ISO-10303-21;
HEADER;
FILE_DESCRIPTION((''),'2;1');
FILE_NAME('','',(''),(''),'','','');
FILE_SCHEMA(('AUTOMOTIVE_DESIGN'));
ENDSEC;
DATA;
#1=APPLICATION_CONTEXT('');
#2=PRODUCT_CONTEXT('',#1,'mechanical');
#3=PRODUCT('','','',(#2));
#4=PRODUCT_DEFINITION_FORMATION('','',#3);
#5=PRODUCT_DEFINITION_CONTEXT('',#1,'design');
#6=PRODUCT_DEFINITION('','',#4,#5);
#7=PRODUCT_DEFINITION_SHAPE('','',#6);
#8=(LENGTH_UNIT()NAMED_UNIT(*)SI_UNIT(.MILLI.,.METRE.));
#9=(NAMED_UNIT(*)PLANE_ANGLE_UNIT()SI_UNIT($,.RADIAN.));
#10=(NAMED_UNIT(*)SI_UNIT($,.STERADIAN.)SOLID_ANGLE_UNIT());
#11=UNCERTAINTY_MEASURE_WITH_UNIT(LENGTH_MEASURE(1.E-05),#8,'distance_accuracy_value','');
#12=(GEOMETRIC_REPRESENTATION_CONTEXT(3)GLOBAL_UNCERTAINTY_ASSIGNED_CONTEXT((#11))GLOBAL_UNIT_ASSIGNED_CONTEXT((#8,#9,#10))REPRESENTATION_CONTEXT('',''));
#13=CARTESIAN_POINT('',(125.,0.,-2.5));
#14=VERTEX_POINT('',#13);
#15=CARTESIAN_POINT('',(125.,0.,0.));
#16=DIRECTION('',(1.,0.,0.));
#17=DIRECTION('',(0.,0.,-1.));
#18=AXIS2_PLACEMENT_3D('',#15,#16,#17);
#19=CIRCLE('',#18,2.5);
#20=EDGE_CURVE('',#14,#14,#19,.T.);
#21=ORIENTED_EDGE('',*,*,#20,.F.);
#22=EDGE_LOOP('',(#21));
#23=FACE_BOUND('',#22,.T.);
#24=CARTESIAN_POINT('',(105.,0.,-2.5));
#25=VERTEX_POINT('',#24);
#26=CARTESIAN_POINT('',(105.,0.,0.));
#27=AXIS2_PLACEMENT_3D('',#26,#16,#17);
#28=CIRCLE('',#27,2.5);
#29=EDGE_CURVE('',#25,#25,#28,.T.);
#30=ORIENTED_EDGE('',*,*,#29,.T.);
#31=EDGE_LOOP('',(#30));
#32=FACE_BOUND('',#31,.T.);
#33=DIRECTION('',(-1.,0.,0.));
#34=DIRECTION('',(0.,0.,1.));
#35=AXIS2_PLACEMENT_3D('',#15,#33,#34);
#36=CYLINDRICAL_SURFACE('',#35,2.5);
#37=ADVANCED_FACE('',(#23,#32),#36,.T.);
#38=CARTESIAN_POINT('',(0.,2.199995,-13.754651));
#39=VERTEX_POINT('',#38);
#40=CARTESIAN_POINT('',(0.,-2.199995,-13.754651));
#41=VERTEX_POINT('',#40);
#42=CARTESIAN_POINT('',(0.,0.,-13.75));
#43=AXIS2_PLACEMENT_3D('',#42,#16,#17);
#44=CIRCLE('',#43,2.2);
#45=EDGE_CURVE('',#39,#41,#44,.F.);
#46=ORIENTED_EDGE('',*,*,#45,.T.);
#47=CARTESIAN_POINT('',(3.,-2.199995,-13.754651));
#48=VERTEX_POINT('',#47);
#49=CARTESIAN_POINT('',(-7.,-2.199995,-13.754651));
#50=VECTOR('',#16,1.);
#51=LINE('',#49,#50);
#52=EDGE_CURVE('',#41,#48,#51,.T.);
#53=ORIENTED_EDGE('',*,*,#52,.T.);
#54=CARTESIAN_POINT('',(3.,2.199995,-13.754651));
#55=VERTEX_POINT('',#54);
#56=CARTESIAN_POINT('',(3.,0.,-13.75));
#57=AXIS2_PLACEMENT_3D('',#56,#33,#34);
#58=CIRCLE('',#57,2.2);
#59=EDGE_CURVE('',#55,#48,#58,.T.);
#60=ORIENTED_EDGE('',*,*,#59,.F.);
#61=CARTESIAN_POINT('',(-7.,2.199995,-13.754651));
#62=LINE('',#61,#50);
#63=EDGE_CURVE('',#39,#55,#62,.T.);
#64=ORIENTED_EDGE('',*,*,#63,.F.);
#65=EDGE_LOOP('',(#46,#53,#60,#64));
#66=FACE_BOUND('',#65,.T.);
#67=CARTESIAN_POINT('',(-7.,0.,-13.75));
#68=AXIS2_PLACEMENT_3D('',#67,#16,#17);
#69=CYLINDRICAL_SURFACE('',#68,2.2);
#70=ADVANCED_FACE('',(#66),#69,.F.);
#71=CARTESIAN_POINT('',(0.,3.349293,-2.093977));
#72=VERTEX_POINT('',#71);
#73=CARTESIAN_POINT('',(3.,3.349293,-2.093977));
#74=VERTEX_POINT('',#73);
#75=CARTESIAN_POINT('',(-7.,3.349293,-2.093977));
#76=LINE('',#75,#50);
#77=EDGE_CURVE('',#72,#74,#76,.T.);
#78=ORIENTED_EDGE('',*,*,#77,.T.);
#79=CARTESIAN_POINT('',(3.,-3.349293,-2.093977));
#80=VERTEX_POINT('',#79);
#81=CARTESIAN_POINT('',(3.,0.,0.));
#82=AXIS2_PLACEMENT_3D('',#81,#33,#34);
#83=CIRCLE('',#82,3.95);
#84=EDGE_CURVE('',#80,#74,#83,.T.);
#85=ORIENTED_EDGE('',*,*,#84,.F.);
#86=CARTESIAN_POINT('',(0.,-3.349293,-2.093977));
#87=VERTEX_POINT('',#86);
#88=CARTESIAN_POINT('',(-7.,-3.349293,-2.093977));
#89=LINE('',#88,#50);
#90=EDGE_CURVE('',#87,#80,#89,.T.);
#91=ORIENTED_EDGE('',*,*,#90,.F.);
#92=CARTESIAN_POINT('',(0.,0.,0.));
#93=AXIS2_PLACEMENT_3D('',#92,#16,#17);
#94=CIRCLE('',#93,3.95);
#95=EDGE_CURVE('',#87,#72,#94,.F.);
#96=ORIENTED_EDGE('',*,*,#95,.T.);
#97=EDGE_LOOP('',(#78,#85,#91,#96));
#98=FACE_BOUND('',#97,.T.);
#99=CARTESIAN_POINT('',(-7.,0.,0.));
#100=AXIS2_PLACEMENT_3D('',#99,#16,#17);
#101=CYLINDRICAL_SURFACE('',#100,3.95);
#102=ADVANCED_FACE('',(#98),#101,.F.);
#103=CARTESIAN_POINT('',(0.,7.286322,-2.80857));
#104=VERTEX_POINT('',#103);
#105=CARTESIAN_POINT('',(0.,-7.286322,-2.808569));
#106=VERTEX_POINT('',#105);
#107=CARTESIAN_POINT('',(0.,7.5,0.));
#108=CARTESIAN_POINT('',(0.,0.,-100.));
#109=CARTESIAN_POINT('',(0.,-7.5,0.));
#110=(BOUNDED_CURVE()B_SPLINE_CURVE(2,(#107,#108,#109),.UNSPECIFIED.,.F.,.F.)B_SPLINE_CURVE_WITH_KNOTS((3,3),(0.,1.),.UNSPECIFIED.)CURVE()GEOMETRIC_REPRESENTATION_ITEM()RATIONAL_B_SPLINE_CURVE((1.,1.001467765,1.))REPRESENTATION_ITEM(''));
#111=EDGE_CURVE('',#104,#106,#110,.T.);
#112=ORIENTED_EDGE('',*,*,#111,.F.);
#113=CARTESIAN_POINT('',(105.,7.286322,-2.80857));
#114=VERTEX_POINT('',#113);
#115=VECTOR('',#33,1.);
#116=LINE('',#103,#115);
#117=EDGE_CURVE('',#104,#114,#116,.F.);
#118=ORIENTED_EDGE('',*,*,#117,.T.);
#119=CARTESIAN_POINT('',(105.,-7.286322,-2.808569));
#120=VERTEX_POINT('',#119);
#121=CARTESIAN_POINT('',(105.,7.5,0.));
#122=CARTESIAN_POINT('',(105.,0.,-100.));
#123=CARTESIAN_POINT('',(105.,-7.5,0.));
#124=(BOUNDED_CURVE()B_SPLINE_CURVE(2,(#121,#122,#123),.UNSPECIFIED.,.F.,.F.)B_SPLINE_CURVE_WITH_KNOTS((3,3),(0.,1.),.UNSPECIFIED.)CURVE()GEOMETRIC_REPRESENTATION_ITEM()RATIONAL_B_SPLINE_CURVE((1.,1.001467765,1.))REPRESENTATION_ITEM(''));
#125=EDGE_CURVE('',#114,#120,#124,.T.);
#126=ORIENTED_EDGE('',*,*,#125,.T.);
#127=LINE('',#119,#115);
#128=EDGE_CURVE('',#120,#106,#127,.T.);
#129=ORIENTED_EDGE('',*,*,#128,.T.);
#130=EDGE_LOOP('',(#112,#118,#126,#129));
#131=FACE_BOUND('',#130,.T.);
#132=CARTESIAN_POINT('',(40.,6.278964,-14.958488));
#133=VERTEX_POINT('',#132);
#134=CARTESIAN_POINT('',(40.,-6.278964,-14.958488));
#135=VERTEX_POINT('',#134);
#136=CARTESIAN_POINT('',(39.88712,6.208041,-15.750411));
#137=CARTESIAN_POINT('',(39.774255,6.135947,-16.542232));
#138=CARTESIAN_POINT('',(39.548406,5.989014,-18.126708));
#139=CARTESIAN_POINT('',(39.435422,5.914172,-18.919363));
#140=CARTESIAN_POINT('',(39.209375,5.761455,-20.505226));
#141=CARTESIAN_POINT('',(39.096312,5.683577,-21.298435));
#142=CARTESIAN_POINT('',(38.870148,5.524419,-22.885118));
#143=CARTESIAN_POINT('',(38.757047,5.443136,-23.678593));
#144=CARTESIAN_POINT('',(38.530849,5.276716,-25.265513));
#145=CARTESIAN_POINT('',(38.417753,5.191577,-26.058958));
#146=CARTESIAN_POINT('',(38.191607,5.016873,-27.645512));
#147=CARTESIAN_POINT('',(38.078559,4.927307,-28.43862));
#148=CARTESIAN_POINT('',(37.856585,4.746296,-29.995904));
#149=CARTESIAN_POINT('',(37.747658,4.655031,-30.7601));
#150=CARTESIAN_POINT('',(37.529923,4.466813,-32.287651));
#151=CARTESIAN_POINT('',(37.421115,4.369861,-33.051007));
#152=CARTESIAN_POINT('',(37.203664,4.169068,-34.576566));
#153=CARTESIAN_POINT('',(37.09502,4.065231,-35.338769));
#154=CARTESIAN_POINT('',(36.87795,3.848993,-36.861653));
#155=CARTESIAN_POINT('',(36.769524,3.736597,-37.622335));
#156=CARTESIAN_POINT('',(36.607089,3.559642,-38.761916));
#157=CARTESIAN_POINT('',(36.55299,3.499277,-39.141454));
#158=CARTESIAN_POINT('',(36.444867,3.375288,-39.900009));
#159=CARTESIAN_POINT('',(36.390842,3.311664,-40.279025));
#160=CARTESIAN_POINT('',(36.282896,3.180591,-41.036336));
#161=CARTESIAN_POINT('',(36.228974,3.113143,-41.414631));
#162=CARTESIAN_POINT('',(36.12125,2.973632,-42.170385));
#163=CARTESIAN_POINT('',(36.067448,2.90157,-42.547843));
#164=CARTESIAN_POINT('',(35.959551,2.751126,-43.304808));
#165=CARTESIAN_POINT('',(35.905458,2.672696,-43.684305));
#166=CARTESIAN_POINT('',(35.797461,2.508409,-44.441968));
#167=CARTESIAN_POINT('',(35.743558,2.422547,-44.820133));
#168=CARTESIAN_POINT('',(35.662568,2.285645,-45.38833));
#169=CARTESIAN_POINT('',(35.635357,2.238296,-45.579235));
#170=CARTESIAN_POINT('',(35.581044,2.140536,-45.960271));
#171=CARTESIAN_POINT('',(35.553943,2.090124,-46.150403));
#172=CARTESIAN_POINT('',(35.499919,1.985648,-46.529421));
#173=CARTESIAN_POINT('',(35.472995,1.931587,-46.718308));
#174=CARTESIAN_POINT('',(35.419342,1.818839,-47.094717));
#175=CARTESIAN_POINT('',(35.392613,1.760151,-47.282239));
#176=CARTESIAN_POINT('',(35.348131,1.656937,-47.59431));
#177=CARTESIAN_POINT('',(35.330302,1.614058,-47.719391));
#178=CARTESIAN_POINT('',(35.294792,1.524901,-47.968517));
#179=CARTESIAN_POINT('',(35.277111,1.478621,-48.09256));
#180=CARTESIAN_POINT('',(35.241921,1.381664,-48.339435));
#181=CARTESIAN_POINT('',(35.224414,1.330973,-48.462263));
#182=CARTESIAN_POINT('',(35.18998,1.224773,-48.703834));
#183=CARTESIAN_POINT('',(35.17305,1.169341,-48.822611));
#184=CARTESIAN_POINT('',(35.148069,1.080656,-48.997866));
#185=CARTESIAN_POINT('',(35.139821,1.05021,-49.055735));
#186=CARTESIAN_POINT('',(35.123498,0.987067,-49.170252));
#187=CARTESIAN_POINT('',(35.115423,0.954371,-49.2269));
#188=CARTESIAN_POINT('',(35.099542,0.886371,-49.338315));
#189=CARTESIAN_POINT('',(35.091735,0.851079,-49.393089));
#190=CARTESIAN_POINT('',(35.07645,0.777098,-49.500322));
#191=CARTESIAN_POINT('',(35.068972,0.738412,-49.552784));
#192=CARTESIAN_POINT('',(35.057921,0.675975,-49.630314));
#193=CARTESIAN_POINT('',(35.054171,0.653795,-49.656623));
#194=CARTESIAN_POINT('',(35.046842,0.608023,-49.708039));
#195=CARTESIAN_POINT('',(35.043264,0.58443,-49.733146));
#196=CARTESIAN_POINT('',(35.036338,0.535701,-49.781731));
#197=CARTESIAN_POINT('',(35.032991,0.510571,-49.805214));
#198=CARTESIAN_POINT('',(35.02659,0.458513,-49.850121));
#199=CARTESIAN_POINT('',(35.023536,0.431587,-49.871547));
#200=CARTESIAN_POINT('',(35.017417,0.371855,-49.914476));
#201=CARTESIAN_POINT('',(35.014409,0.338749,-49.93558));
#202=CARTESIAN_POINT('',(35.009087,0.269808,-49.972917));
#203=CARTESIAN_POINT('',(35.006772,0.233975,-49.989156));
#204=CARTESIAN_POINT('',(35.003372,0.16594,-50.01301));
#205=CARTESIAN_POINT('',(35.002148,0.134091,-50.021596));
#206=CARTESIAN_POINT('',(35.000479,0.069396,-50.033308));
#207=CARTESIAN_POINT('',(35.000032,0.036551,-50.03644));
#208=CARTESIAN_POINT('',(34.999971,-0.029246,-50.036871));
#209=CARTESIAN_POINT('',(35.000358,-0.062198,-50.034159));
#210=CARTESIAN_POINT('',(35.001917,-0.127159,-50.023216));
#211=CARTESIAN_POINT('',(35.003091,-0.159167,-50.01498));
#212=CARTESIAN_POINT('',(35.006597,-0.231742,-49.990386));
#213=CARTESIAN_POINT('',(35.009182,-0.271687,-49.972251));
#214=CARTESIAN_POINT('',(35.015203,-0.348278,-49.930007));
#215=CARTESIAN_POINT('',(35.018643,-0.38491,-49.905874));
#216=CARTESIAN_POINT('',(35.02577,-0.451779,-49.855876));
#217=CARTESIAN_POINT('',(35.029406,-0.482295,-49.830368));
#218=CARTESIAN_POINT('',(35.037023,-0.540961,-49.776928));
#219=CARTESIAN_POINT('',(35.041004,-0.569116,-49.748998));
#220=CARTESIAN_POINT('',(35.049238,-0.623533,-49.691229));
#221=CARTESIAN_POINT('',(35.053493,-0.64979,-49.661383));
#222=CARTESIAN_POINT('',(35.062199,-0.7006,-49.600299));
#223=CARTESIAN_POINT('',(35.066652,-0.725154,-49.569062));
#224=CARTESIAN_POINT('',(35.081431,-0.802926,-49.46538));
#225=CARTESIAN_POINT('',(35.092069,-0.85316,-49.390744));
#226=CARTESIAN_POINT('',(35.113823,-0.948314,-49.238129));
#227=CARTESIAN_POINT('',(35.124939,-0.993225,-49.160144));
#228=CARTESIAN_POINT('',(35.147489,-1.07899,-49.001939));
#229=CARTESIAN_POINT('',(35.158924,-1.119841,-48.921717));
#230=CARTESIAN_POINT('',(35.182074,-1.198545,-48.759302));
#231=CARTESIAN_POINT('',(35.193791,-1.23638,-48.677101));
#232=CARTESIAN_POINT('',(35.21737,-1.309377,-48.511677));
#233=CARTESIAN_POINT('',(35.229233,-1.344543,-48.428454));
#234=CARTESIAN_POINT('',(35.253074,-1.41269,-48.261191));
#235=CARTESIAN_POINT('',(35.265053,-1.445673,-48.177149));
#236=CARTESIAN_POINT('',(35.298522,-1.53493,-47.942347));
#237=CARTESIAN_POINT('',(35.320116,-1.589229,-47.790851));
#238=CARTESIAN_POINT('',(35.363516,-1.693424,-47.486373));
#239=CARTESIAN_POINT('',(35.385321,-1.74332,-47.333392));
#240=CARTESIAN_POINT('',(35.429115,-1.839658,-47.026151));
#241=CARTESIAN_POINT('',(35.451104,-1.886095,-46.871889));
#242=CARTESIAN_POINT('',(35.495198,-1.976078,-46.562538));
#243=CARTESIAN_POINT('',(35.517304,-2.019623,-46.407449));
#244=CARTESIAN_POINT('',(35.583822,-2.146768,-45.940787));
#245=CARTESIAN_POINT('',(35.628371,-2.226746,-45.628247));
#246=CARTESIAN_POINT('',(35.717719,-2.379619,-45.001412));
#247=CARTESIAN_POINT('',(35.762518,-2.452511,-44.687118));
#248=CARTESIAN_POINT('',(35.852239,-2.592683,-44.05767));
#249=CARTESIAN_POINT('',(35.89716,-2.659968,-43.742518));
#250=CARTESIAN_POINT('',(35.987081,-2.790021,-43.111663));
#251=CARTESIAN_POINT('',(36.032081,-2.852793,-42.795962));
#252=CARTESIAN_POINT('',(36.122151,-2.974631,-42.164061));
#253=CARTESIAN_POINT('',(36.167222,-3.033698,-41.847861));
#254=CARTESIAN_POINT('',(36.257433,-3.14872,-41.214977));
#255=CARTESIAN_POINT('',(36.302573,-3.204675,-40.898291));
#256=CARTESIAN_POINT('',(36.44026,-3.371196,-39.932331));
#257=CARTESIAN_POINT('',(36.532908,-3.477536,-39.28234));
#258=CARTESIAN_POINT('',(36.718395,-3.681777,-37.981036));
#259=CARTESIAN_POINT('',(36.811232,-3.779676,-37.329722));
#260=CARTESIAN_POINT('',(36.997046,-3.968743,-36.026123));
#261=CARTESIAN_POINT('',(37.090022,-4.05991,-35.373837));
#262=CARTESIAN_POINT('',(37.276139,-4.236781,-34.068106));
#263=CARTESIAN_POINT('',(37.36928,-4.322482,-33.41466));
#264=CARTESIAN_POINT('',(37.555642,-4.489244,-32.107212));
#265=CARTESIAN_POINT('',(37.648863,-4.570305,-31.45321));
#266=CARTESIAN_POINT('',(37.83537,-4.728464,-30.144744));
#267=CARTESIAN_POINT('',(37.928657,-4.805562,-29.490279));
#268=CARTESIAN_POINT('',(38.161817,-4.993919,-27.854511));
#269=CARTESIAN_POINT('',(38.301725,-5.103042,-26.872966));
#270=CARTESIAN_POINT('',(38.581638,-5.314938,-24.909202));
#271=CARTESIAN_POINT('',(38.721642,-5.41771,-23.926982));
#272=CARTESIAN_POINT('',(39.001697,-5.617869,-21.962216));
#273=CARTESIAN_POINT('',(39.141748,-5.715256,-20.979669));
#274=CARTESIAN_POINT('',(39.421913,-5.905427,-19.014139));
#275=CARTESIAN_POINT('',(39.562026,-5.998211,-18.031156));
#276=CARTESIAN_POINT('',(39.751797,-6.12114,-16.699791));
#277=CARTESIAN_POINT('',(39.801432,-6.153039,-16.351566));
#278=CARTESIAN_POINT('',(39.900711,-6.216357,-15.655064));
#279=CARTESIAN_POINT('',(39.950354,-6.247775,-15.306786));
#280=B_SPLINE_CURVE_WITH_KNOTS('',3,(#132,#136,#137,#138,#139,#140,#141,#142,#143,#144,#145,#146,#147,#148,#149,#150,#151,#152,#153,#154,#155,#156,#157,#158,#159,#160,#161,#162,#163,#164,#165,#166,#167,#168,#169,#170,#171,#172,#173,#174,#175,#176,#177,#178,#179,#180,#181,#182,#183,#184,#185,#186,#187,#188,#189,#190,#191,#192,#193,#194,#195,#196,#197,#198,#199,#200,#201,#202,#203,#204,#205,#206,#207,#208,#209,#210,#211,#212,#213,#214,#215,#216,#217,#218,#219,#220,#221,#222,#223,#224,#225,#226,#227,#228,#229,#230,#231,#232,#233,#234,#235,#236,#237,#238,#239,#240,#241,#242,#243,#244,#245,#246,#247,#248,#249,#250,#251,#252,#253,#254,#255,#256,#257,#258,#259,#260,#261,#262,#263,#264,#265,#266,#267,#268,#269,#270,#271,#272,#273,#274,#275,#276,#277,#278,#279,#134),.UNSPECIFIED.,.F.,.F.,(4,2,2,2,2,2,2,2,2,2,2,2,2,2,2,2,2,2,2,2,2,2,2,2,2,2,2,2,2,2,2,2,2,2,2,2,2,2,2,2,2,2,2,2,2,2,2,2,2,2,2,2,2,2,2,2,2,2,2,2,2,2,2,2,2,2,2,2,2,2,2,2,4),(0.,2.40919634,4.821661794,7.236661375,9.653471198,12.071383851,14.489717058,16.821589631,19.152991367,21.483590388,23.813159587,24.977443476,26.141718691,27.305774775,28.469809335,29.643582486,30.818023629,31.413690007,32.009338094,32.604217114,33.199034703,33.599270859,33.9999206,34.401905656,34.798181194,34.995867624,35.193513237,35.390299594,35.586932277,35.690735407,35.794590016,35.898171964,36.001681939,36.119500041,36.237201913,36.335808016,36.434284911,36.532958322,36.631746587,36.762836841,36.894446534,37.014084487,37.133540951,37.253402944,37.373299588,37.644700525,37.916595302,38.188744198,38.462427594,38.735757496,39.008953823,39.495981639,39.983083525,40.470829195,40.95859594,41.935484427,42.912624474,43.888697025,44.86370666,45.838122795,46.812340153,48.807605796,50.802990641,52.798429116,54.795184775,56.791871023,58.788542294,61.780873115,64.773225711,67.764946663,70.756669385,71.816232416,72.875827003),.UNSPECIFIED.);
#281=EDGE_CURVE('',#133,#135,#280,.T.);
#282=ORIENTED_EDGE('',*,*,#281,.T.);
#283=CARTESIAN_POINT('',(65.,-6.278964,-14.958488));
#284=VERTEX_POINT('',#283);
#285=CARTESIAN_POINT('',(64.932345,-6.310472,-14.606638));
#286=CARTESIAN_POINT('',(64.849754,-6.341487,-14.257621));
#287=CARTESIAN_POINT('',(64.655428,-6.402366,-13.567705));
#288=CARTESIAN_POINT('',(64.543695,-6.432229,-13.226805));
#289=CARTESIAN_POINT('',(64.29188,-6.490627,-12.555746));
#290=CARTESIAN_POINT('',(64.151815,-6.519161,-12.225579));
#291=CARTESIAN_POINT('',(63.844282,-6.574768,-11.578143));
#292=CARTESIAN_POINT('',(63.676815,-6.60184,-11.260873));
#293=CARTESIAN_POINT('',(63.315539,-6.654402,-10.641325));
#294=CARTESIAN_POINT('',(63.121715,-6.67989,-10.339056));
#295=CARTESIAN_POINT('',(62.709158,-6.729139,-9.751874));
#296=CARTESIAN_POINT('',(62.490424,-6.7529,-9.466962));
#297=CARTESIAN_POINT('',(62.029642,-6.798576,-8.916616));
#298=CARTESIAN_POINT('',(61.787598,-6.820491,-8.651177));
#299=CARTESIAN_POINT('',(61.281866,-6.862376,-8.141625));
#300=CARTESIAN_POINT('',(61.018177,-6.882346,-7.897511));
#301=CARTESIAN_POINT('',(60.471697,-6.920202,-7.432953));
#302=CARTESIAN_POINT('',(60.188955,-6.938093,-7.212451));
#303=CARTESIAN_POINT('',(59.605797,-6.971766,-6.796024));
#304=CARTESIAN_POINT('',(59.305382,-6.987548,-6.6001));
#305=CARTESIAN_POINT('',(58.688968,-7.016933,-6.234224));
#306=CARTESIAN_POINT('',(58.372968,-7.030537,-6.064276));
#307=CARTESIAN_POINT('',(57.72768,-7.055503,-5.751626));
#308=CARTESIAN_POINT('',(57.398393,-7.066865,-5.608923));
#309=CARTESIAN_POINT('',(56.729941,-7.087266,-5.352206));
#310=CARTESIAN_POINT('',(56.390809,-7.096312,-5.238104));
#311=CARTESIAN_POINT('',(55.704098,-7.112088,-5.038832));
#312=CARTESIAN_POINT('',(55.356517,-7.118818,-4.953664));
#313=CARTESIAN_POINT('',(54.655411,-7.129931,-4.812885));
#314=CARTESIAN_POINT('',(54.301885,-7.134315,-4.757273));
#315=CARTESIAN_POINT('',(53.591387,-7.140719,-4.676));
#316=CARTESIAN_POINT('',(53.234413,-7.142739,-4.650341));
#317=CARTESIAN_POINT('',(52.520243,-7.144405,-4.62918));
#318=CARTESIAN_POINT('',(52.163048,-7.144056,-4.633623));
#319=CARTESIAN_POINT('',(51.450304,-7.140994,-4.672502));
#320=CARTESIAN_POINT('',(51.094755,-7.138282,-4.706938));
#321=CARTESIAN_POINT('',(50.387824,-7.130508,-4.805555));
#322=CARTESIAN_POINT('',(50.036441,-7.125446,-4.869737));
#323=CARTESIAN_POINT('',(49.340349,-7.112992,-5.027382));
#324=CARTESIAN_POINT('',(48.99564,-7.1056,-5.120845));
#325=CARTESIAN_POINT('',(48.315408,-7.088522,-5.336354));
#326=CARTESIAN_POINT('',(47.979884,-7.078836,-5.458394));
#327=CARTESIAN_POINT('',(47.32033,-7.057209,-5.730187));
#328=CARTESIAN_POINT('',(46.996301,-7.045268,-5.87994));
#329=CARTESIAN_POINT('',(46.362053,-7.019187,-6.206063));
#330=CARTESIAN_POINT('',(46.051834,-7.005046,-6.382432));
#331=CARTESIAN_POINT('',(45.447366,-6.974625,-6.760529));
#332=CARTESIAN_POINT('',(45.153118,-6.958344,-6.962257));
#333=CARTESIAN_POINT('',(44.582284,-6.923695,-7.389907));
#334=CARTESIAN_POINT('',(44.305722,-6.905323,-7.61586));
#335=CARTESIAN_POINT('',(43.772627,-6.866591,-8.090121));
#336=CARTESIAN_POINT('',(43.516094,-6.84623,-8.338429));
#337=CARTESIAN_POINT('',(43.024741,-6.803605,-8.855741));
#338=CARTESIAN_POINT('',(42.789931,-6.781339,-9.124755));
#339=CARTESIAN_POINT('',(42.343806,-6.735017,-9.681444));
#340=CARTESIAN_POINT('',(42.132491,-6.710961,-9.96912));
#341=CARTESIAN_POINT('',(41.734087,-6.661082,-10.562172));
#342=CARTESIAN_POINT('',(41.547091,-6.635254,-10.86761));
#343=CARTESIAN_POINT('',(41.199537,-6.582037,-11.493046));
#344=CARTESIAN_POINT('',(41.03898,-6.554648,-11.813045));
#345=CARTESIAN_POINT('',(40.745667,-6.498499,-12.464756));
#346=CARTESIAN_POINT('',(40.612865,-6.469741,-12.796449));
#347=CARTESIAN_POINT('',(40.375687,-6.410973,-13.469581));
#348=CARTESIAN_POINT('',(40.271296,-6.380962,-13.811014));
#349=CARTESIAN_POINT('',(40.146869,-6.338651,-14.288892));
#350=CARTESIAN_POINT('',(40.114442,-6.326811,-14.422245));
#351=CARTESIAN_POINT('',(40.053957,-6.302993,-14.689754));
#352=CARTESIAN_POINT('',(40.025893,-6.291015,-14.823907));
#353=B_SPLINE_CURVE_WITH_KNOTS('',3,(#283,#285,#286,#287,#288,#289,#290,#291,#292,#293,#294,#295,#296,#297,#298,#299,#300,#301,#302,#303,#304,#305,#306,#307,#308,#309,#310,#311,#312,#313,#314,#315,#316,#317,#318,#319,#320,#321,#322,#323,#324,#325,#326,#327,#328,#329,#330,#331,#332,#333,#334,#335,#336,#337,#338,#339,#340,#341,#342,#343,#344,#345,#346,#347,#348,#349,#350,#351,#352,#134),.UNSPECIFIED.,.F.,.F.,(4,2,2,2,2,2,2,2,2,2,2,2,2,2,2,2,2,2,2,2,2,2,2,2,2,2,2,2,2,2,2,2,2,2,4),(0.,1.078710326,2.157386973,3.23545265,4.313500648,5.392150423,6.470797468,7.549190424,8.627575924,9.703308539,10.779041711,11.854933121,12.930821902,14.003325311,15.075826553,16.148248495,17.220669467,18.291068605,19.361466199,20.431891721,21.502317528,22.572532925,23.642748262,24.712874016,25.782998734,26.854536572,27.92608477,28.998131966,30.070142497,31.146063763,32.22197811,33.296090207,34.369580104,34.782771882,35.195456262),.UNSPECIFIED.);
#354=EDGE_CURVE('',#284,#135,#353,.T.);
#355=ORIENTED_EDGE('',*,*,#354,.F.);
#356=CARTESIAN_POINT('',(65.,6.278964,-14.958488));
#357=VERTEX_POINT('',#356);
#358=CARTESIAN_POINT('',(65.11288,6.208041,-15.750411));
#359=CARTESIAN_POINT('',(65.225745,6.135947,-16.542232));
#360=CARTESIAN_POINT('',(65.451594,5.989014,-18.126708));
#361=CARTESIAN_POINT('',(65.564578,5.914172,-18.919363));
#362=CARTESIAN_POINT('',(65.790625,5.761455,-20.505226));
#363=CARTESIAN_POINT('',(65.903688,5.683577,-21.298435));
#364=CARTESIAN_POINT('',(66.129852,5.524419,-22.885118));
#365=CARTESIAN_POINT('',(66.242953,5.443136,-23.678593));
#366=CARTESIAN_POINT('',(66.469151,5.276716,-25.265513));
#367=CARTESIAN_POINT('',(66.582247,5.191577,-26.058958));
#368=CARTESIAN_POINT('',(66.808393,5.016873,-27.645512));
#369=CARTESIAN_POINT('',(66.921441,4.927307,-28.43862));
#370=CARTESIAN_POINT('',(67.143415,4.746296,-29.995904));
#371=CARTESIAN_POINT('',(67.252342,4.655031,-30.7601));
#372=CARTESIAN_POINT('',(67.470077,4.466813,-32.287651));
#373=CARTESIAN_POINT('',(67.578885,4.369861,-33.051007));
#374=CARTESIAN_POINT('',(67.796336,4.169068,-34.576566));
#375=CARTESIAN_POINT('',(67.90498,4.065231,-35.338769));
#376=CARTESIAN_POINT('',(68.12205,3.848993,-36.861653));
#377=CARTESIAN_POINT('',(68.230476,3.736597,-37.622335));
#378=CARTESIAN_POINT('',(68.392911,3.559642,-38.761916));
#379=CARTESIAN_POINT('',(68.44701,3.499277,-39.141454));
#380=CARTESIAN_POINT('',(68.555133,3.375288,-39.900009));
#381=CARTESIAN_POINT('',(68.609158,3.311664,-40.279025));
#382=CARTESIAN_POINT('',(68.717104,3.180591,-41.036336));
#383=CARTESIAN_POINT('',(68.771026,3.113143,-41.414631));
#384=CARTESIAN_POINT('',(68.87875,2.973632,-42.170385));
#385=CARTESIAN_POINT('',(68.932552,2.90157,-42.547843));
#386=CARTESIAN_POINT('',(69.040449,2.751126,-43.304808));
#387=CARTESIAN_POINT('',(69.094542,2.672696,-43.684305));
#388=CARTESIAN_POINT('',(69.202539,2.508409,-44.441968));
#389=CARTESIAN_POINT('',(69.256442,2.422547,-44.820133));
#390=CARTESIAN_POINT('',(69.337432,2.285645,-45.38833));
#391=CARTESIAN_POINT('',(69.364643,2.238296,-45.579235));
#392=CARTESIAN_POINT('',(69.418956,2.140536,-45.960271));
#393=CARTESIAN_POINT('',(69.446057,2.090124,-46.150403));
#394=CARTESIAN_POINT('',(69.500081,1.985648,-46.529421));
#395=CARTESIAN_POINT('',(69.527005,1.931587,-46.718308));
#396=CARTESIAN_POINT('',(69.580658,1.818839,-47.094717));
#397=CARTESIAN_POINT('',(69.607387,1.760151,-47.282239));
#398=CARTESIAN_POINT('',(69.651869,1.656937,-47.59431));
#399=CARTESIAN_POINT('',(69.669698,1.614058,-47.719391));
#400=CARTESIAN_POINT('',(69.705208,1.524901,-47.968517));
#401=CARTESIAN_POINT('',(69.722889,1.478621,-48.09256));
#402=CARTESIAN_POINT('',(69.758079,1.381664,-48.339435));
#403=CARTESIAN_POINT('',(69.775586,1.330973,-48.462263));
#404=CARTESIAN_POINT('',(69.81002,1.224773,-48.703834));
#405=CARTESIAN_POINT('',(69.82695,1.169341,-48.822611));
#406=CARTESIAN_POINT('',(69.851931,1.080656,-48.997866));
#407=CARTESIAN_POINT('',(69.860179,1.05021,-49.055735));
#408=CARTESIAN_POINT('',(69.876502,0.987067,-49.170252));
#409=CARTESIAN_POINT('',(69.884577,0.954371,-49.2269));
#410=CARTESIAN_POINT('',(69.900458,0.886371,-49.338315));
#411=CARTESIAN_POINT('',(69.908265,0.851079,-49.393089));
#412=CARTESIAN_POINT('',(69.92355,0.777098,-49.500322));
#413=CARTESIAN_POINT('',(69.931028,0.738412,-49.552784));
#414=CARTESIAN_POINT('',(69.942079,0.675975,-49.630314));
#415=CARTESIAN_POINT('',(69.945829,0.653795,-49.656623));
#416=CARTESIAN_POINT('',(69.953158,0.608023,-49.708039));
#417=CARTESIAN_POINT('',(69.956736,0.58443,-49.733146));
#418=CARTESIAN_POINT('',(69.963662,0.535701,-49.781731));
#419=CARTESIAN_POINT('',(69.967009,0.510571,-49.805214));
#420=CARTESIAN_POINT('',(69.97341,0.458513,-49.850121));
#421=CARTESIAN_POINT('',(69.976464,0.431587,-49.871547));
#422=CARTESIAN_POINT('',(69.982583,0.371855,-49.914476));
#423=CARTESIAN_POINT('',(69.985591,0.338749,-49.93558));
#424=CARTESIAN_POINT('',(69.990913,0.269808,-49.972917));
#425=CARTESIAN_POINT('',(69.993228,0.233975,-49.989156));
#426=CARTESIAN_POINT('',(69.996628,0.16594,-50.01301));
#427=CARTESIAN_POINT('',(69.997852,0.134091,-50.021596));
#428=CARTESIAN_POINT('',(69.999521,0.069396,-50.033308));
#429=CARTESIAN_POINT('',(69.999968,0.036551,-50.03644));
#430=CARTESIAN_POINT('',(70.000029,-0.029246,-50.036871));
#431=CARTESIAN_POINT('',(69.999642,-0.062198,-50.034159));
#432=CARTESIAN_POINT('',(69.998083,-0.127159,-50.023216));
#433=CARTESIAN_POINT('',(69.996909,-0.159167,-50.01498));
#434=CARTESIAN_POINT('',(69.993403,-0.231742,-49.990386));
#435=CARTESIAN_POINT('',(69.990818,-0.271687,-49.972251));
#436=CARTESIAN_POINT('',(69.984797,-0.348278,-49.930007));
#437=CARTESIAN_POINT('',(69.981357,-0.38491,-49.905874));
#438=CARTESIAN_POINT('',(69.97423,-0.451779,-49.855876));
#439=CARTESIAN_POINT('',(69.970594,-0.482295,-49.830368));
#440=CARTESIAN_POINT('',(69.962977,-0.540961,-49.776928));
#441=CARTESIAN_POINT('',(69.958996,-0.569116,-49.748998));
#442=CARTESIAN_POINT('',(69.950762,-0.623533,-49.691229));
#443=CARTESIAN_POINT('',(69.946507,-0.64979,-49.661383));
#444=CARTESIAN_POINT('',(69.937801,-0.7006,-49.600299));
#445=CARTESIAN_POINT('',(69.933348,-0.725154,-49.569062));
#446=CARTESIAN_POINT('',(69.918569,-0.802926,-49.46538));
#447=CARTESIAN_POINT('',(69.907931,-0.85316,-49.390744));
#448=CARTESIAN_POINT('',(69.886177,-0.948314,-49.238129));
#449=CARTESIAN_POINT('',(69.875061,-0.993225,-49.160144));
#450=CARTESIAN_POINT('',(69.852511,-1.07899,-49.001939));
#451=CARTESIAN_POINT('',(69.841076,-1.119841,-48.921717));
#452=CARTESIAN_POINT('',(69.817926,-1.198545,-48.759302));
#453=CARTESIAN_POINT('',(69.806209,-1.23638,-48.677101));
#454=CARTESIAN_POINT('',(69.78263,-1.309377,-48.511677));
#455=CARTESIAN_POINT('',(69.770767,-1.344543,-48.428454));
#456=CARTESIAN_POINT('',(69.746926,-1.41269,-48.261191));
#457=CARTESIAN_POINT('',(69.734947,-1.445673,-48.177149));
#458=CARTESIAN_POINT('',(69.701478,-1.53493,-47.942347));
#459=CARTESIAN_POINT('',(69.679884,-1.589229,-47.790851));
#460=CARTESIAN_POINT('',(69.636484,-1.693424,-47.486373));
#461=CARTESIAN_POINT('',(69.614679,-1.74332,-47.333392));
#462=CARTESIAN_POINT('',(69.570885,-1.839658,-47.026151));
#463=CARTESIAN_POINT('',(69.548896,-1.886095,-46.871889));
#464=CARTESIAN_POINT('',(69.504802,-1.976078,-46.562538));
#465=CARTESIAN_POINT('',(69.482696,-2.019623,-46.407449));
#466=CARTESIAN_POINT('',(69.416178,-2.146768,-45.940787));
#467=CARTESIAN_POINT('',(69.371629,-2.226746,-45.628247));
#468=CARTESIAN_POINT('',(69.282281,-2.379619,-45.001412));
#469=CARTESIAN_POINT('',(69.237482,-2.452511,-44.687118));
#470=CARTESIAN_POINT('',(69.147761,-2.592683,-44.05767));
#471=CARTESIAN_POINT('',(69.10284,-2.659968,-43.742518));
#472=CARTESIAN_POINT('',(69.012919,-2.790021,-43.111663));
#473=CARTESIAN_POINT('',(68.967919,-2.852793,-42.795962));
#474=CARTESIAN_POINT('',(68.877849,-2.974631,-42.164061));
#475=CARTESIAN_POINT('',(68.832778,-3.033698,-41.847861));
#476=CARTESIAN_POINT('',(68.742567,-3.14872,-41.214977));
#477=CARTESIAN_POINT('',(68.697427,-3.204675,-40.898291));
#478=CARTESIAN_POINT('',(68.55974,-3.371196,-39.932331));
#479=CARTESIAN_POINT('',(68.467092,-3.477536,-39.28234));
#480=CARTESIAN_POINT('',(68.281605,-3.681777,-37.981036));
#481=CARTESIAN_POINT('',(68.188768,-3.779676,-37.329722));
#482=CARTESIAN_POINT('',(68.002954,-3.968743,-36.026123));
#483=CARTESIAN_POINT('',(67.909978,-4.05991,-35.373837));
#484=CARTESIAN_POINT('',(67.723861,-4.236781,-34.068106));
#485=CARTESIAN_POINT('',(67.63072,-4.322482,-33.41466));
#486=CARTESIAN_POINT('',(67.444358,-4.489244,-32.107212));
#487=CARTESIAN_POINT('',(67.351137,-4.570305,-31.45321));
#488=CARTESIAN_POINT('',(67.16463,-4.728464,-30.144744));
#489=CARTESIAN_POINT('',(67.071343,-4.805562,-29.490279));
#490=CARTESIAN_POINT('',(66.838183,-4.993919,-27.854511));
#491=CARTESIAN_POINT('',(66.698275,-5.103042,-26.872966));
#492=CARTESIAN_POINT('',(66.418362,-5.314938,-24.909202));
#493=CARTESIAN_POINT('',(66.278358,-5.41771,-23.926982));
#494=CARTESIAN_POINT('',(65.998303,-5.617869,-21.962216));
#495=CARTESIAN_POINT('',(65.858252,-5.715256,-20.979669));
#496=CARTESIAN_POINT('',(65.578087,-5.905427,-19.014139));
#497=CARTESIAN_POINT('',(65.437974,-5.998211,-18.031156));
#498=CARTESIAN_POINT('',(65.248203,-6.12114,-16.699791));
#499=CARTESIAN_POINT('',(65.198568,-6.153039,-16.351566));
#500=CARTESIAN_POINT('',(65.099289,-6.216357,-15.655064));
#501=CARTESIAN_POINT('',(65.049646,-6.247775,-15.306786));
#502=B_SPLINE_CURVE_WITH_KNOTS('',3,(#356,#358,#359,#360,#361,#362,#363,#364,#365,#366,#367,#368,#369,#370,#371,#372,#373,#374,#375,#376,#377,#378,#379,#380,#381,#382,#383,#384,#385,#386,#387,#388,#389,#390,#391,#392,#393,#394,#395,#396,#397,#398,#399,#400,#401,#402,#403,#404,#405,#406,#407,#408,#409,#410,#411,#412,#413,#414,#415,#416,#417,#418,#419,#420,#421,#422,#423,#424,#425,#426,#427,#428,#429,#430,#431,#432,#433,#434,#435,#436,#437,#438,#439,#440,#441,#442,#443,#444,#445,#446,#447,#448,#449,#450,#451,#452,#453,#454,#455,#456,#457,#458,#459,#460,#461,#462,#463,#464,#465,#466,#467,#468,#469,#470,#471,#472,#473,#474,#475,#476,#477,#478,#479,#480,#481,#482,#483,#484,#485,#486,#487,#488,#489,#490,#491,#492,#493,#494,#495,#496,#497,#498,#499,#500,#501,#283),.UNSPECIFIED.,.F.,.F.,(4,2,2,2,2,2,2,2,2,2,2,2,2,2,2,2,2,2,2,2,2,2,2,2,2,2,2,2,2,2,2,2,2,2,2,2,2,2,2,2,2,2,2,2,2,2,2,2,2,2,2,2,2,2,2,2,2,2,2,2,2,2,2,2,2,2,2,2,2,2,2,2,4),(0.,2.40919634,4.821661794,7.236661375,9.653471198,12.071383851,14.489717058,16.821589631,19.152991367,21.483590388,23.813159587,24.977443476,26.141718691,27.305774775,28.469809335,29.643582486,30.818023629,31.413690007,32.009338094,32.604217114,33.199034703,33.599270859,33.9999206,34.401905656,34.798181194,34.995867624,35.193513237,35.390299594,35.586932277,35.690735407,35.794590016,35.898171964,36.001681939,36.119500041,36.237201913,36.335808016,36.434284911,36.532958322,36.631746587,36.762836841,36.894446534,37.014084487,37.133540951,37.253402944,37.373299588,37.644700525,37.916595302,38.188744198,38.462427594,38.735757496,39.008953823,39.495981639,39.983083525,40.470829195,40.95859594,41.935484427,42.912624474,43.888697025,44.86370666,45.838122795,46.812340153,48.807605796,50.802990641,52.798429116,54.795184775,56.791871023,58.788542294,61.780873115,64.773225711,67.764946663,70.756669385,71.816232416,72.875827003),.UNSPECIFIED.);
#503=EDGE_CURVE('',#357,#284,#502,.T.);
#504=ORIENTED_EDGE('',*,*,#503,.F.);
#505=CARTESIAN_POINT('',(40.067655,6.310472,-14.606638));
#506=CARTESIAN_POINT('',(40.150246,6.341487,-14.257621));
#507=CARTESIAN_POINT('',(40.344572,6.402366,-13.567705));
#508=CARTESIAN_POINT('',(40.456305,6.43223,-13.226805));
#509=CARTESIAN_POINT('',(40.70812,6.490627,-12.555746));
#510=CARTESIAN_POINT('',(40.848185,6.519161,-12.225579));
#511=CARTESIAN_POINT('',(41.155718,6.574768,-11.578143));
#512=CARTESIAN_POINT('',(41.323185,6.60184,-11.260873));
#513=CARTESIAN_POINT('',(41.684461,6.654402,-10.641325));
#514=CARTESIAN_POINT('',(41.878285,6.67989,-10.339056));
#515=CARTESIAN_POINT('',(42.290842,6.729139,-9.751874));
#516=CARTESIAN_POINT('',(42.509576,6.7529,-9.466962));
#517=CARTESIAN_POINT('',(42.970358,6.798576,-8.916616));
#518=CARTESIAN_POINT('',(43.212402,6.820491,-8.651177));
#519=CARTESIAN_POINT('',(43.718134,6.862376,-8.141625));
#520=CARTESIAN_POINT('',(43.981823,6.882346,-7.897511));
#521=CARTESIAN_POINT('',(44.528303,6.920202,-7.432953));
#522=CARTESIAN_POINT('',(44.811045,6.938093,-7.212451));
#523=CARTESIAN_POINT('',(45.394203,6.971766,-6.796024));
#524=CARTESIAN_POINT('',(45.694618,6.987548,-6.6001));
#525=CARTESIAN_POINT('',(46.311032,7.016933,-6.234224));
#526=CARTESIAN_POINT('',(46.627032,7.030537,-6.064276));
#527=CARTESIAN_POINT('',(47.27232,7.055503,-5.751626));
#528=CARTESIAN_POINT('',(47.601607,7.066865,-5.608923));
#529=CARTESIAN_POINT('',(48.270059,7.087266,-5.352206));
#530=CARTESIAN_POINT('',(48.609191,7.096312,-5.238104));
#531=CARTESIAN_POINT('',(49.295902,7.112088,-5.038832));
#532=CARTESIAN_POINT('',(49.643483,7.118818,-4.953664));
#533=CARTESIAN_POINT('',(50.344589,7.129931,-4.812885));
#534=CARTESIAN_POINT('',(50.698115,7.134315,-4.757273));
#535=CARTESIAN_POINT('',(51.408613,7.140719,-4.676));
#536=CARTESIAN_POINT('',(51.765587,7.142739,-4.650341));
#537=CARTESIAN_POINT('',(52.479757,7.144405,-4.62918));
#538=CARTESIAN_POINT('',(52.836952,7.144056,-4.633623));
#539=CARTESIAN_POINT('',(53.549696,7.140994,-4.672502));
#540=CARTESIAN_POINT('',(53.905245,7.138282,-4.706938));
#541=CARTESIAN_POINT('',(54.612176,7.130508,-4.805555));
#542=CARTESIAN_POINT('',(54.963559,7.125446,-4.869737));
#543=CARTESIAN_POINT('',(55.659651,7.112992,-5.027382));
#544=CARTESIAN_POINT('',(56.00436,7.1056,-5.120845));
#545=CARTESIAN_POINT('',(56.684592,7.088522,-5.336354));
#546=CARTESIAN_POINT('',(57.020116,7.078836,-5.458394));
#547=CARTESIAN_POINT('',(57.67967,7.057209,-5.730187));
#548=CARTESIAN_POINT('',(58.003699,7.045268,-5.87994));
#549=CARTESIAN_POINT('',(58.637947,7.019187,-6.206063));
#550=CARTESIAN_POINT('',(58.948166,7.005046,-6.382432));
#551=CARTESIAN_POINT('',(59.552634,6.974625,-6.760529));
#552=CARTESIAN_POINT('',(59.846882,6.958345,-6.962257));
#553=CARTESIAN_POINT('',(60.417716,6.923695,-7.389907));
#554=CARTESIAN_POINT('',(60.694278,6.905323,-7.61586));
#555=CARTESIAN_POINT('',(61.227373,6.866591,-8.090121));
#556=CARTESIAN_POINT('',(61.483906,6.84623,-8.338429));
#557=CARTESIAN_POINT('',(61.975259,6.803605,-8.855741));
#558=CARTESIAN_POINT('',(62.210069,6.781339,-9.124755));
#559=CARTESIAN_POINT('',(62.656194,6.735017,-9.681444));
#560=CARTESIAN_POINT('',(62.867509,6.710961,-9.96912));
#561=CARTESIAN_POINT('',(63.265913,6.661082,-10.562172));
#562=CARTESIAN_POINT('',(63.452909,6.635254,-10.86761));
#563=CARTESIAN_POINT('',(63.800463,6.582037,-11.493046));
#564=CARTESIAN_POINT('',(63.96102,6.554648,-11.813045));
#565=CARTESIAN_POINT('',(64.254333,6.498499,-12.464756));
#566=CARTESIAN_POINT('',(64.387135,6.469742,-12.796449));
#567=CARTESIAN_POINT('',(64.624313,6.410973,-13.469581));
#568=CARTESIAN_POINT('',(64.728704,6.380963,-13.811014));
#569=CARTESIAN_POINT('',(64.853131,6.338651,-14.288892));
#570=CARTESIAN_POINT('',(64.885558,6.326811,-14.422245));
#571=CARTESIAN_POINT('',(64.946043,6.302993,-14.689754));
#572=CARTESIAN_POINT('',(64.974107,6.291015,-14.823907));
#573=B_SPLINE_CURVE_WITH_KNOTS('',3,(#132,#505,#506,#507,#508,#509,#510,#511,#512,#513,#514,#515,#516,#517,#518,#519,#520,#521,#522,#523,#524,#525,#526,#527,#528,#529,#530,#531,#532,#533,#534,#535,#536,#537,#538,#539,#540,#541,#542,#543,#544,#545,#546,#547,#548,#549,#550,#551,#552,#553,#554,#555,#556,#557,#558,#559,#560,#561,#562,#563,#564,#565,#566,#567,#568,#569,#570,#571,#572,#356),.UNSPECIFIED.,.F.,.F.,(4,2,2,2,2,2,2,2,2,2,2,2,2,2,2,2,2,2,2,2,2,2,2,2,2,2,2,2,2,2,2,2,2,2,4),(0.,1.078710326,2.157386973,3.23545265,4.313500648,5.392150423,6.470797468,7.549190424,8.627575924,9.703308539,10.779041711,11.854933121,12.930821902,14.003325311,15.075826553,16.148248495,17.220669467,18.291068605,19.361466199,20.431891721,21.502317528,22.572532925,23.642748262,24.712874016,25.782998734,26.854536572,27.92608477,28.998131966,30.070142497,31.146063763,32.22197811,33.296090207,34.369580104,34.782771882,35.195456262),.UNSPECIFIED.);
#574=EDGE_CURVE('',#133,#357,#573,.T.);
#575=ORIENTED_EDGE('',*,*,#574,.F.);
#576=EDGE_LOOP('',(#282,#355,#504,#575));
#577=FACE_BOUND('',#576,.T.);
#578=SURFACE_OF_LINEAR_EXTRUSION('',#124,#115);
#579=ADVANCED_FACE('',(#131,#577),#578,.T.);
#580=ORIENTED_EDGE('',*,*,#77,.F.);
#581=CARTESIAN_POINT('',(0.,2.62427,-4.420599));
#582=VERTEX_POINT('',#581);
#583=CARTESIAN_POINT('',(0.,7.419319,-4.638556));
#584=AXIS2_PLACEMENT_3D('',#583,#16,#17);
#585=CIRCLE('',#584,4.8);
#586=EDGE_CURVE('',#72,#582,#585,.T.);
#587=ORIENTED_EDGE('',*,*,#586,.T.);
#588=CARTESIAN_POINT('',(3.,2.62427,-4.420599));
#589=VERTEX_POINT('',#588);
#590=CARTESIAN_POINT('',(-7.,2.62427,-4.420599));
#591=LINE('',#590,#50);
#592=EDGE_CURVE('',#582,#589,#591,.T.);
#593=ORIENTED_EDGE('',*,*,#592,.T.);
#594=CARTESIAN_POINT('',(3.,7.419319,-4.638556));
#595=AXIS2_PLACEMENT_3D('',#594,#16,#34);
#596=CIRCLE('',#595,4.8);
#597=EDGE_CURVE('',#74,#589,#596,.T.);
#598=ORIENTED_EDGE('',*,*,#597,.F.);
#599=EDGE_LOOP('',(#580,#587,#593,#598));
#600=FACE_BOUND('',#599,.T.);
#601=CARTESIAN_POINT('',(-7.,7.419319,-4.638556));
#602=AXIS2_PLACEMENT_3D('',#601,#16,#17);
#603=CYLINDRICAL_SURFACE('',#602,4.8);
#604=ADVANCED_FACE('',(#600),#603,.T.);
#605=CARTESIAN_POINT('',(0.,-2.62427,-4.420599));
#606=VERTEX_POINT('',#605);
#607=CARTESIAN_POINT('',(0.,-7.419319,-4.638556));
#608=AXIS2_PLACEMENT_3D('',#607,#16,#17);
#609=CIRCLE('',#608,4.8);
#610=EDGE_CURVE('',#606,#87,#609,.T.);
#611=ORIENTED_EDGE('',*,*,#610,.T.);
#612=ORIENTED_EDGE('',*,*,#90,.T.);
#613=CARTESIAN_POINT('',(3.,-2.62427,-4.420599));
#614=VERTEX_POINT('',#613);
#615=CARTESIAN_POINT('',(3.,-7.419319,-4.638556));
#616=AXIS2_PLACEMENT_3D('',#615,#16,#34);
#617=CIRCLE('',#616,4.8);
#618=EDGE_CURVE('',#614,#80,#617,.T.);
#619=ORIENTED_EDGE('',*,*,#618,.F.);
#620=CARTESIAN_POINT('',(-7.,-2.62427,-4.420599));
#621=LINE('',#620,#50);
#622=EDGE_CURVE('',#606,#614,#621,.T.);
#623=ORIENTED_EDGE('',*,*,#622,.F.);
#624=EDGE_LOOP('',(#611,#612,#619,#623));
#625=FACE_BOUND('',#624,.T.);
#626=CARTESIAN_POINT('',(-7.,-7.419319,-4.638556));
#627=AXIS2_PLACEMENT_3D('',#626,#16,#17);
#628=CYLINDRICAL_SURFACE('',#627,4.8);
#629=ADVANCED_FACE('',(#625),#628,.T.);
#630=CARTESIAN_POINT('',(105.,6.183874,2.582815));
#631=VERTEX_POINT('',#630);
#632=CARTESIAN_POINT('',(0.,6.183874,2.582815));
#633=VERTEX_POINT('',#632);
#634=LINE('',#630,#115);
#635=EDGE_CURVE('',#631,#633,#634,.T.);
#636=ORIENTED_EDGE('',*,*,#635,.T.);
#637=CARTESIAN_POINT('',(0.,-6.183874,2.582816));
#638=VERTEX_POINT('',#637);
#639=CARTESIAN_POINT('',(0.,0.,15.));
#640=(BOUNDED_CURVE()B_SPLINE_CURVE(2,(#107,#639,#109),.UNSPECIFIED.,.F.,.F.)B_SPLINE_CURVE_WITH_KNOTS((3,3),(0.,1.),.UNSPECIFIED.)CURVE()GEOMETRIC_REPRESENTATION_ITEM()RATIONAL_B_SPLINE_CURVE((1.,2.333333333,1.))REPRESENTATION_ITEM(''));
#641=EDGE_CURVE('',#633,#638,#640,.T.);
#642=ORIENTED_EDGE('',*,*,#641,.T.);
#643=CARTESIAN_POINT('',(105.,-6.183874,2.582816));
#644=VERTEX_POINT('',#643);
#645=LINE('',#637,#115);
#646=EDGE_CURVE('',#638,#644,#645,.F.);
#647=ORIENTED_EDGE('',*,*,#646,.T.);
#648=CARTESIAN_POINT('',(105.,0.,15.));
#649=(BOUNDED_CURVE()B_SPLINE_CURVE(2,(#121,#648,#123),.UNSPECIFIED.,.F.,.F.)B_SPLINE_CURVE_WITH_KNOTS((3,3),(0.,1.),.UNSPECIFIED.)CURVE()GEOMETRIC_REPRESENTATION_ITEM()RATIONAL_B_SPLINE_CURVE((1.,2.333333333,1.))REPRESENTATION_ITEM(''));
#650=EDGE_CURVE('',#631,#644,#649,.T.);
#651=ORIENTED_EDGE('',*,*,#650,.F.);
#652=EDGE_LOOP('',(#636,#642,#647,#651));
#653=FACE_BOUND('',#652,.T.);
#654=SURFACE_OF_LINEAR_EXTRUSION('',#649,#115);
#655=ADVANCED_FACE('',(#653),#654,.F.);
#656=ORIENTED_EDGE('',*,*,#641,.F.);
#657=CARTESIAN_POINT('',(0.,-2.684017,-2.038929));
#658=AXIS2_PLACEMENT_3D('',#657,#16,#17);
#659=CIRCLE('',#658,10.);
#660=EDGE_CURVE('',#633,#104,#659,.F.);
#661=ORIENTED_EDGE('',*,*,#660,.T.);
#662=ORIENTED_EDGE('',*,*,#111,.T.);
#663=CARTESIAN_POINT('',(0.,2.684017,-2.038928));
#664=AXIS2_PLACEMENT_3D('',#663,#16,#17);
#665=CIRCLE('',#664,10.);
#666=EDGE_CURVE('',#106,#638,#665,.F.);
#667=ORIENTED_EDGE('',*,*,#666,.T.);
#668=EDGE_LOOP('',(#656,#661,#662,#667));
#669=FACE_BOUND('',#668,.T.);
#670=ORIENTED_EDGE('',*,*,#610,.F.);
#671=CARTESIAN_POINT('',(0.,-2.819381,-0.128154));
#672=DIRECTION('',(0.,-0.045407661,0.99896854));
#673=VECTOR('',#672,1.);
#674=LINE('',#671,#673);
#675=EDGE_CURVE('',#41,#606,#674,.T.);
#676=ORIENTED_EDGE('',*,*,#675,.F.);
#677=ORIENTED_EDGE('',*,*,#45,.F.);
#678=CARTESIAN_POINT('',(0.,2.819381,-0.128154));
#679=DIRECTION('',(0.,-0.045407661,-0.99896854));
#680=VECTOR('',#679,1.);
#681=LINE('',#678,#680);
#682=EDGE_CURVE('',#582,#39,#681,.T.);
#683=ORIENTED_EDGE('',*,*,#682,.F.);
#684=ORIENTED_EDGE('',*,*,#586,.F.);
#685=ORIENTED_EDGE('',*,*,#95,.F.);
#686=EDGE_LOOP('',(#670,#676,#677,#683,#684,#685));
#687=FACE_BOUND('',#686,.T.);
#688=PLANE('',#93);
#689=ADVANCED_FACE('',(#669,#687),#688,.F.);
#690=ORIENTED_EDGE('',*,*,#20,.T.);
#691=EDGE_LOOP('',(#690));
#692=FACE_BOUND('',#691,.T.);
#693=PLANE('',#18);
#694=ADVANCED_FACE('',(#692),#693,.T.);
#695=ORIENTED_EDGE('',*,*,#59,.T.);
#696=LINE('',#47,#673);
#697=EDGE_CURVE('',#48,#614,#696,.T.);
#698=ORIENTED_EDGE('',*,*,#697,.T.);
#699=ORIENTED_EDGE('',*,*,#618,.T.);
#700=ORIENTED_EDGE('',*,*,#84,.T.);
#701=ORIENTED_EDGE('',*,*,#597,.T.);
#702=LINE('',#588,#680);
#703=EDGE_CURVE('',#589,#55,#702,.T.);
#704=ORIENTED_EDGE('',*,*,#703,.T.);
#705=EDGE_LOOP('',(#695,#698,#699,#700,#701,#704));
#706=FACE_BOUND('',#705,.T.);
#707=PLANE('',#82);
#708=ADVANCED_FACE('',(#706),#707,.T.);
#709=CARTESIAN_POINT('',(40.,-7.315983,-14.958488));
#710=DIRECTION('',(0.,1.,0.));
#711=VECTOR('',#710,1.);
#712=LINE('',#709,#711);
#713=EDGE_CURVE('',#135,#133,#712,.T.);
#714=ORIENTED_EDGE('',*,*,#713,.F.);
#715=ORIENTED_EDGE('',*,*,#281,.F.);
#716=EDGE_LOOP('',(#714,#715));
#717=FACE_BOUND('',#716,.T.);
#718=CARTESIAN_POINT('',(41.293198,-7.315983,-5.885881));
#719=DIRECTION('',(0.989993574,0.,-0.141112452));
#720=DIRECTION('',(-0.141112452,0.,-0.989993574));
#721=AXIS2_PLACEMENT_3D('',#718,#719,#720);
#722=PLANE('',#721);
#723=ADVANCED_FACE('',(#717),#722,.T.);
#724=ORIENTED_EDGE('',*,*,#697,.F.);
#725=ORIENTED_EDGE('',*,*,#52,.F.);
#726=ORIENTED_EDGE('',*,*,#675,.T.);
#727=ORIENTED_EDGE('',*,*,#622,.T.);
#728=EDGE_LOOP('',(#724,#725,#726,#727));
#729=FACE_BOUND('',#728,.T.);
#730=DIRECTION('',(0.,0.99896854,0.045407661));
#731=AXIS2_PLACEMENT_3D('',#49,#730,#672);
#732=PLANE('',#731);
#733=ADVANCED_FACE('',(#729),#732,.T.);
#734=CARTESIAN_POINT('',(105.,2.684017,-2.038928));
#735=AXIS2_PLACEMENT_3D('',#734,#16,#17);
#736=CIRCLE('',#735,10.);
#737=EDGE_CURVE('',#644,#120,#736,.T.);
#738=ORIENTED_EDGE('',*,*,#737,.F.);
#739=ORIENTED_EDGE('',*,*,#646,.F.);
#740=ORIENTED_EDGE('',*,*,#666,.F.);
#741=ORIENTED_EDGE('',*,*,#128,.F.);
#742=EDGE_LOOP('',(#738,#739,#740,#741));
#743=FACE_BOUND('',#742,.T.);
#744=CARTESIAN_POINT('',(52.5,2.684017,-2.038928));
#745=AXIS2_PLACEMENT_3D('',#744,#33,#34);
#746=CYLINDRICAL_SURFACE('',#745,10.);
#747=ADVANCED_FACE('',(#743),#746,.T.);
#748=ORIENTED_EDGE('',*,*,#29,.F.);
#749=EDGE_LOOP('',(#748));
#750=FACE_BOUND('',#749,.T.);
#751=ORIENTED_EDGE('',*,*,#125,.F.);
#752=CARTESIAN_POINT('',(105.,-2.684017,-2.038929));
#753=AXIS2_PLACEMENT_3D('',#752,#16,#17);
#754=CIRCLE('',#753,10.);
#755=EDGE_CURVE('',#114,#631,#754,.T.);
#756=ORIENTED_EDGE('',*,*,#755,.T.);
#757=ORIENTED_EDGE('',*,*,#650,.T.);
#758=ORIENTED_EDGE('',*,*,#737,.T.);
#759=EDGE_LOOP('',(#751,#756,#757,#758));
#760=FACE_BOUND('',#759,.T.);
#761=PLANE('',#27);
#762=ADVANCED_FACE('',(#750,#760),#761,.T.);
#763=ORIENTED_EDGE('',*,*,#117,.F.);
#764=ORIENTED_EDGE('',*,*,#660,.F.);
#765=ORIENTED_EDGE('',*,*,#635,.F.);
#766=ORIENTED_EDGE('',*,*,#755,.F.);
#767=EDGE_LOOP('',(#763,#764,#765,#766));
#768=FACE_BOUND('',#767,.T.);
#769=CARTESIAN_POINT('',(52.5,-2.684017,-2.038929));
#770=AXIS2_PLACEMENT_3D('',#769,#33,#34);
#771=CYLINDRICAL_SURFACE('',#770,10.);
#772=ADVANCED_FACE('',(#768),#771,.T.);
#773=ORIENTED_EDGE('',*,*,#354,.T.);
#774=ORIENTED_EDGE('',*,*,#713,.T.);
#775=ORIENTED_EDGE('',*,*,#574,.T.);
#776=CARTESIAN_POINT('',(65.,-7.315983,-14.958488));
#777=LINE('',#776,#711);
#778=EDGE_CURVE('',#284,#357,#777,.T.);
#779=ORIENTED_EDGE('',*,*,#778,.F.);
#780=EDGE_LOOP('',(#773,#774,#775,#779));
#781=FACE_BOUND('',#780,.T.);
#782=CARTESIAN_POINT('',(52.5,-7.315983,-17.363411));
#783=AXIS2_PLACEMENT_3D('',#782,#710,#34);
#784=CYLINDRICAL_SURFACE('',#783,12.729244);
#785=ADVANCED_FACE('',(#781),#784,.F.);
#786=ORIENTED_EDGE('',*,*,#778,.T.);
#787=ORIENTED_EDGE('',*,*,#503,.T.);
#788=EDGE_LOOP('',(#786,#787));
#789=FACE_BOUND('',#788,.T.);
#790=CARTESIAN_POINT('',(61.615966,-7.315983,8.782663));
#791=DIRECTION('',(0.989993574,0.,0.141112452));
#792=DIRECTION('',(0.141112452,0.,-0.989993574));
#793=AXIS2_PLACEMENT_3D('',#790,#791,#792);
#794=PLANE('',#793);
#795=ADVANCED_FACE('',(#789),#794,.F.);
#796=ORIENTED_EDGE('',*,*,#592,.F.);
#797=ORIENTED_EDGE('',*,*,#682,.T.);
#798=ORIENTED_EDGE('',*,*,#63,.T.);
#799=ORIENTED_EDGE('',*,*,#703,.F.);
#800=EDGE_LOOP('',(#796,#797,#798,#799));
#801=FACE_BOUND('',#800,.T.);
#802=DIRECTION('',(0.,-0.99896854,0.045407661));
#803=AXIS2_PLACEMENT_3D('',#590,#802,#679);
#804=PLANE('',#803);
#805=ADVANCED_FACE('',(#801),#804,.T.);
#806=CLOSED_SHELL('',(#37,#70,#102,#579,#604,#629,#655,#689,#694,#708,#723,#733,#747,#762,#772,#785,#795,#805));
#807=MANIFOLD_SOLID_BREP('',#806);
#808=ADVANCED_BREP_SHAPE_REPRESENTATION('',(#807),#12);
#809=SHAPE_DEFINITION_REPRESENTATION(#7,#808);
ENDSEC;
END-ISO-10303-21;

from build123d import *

# Parameters (mm, degrees)
SKETCH1_R               = 1.5
BOSS_EXTRUDE1_DEPTH     = 105
FILLET1_R               = 10
CUT_EXTRUDE1_DEPTH      = 117.542660484
CUT_EXTRUDE1_DEPTH_BACK = 117.542660484
CAVITY1_DEPTH           = 3
SKETCH3_R               = 2.5
SKETCH3_R_2             = 1.5
BOSS_EXTRUDE2_DEPTH     = 20
BOSS_EXTRUDE3_REACH     = 134.065
SKETCH4_R               = 1.5
CUT_EXTRUDE2_DEPTH      = 135.841357497
CUT_EXTRUDE2_DEPTH_BACK = 135.841357497
FILLET2_R               = 5
CUT_EXTRUDE3_DEPTH      = 10


# Read off the part's stored shape, not the designer's step: Cavity1
with BuildPart() as part:
    # Sketch1 → Boss-Extrude1 (new body)
    with BuildSketch(Plane(origin=(0, 0, 0), x_dir=(0, 0, -1), z_dir=(1, 0, 0))):
        with BuildLine():
            add(Edge.make_bspline(
                [(3.73e-07, 7.5), (-15, 0), (-3.73e-07, -7.5)],
                knots=[0, 0, 0, 1, 1, 1], degree=2, weights=[1, 2.333333333, 1]))
            add(Edge.make_bspline(
                [(3.73e-07, 7.5), (100, 0), (-3.73e-07, -7.5)],
                knots=[0, 0, 0, 1, 1, 1], degree=2, weights=[1, 1.001467765, 1]))
        make_face()
        Circle(SKETCH1_R, mode=Mode.SUBTRACT)
    extrude(amount=BOSS_EXTRUDE1_DEPTH)

    # Fillet1
    fillet1_edges = [part.edges().sort_by_distance(p)[0] for p in [
        (52.5, -7.5, 3.73e-07),
        (52.5, 7.5, -3.73e-07),
    ]]
    fillet(fillet1_edges, radius=FILLET1_R)

    # Sketch2 → Cut-Extrude1 (cut, two sides: drawn at the far end of the back side and taken through both)
    with BuildSketch(Plane(origin=(0, 0, 0), x_dir=(1, 0, 0), z_dir=(0, 1, 0)).offset(-CUT_EXTRUDE1_DEPTH_BACK)):
        with BuildLine():
            Line((65, 19.76833361), (65, 24.578179161))
            ThreePointArc((65, 24.578179161), (52.5, 34.902500415), (40, 24.578179161))
            Line((40, 24.578179161), (40, 19.76833361))
            Line((40, 19.76833361), (40, 14.958488059))
            ThreePointArc((40, 14.958488059), (52.5, 4.634166805), (65, 14.958488059))
            Line((65, 14.958488059), (65, 19.76833361))
        make_face()
        with BuildLine():
            Line((65, 24.578179161), (65, 50.03666722))
            Line((65, 50.03666722), (40, 50.03666722))
            Line((40, 50.03666722), (40, 24.578179161))
            ThreePointArc((40, 24.578179161), (52.5, 34.902500415), (65, 24.578179161))
        make_face()
    extrude(amount=CUT_EXTRUDE1_DEPTH + CUT_EXTRUDE1_DEPTH_BACK, mode=Mode.SUBTRACT)

    # Cavity1 outline → Cavity1 (cut)
    with BuildSketch(Plane.YZ):
        with BuildLine():
            ThreePointArc((-2, -13.75), (0, -15.75), (2, -13.75))
            Line((2, -13.75), (2.497863905, -2.796994085))
            ThreePointArc((2.497863905, -2.796994085), (0, 3.75), (-2.497863905, -2.796994085))
            Line((-2.497863905, -2.796994085), (-2, -13.75))
        make_face()
    extrude(amount=CAVITY1_DEPTH, mode=Mode.SUBTRACT)

    # Sketch3 → Boss-Extrude2 (add)
    # profile 1 of 2: a face of its own
    with BuildSketch(Plane(origin=(105, 0, 0), x_dir=(0, 0, -1), z_dir=(1, 0, 0))):
        Circle(SKETCH3_R)
        with Locations(Location((0, 0, 0), (0, 0, 180))):
            Circle(SKETCH3_R_2, mode=Mode.SUBTRACT)
    # profile 2 of 2: a face of its own
    with BuildSketch(Plane(origin=(105, 0, 0), x_dir=(0, 0, -1), z_dir=(1, 0, 0))):
        with Locations(Location((0, 0, 0), (0, 0, 180))):
            Circle(SKETCH3_R_2)
    extrude(amount=BOSS_EXTRUDE2_DEPTH)

    # Sketch4 → Boss-Extrude3 (add, up to next)
    with BuildSketch(Plane.ZY.offset(-3), mode=Mode.PRIVATE) as boss_extrude3_sk1:
        Circle(SKETCH4_R)
    boss_extrude3_tool1 = extrude(boss_extrude3_sk1.sketch, amount=-BOSS_EXTRUDE3_REACH, mode=Mode.PRIVATE) - part.part
    add(boss_extrude3_tool1.solids().sort_by_distance((3, 0, 0))[0])

    # Sketch5 → Cut-Extrude2 (cut, two sides: drawn at the far end of the back side and taken through both)
    with BuildSketch(Plane(origin=(0, 0, 0), x_dir=(1, 0, 0), z_dir=(0, 1, 0)).offset(-CUT_EXTRUDE2_DEPTH_BACK)):
        Polygon((40, 14.958488059), (35, 50.03666722), (40, 50.03666722), align=None)
        Polygon((65, 50.03666722), (70, 50.03666722), (65, 14.958488059), align=None)
    extrude(amount=CUT_EXTRUDE2_DEPTH + CUT_EXTRUDE2_DEPTH_BACK, mode=Mode.SUBTRACT)

    # Fillet2
    fillet2_edges = [part.edges().sort_by_distance(p)[0] for p in [
        (1.5, 2.497863905, -2.796994085),
        (1.5, -2.497863905, -2.796994085),
    ]]
    fillet(fillet2_edges, radius=FILLET2_R)

    # Sketch7 → Cut-Extrude3 (cut)
    with BuildSketch(Plane.ZY.offset(-3)):
        with BuildLine():
            Line((-13.754651281, -2.199995083), (-4.420599378, -2.62427017))
            ThreePointArc((-4.420599378, -2.62427017), (-3.210509972, -2.836668826), (-2.093976777, -3.349292651))
            ThreePointArc((-2.093976777, -3.349292651), (3.95, 0), (-2.093976777, 3.349292651))
            ThreePointArc((-2.093976777, 3.349292651), (-3.210509972, 2.836668826), (-4.420599378, 2.62427017))
            Line((-4.420599378, 2.62427017), (-13.754651281, 2.199995083))
            ThreePointArc((-13.754651281, 2.199995083), (-15.95, 0), (-13.754651281, -2.199995083))
        make_face()
        with BuildLine():
            Line((-4.411517846, 2.424476462), (-13.75, 2))
            ThreePointArc((-13.75, 2), (-15.75, 0), (-13.75, -2))
            Line((-13.75, -2), (-4.411517846, -2.424476462))
            ThreePointArc((-4.411517846, -2.424476462), (-3.151008047, -2.645725062), (-1.987952636, -3.179708213))
            ThreePointArc((-1.987952636, -3.179708213), (3.75, 0), (-1.987952636, 3.179708213))
            ThreePointArc((-1.987952636, 3.179708213), (-3.151008047, 2.645725062), (-4.411517846, 2.424476462))
        make_face(mode=Mode.SUBTRACT)
    extrude(amount=CUT_EXTRUDE3_DEPTH, mode=Mode.SUBTRACT)


solid = part.part
